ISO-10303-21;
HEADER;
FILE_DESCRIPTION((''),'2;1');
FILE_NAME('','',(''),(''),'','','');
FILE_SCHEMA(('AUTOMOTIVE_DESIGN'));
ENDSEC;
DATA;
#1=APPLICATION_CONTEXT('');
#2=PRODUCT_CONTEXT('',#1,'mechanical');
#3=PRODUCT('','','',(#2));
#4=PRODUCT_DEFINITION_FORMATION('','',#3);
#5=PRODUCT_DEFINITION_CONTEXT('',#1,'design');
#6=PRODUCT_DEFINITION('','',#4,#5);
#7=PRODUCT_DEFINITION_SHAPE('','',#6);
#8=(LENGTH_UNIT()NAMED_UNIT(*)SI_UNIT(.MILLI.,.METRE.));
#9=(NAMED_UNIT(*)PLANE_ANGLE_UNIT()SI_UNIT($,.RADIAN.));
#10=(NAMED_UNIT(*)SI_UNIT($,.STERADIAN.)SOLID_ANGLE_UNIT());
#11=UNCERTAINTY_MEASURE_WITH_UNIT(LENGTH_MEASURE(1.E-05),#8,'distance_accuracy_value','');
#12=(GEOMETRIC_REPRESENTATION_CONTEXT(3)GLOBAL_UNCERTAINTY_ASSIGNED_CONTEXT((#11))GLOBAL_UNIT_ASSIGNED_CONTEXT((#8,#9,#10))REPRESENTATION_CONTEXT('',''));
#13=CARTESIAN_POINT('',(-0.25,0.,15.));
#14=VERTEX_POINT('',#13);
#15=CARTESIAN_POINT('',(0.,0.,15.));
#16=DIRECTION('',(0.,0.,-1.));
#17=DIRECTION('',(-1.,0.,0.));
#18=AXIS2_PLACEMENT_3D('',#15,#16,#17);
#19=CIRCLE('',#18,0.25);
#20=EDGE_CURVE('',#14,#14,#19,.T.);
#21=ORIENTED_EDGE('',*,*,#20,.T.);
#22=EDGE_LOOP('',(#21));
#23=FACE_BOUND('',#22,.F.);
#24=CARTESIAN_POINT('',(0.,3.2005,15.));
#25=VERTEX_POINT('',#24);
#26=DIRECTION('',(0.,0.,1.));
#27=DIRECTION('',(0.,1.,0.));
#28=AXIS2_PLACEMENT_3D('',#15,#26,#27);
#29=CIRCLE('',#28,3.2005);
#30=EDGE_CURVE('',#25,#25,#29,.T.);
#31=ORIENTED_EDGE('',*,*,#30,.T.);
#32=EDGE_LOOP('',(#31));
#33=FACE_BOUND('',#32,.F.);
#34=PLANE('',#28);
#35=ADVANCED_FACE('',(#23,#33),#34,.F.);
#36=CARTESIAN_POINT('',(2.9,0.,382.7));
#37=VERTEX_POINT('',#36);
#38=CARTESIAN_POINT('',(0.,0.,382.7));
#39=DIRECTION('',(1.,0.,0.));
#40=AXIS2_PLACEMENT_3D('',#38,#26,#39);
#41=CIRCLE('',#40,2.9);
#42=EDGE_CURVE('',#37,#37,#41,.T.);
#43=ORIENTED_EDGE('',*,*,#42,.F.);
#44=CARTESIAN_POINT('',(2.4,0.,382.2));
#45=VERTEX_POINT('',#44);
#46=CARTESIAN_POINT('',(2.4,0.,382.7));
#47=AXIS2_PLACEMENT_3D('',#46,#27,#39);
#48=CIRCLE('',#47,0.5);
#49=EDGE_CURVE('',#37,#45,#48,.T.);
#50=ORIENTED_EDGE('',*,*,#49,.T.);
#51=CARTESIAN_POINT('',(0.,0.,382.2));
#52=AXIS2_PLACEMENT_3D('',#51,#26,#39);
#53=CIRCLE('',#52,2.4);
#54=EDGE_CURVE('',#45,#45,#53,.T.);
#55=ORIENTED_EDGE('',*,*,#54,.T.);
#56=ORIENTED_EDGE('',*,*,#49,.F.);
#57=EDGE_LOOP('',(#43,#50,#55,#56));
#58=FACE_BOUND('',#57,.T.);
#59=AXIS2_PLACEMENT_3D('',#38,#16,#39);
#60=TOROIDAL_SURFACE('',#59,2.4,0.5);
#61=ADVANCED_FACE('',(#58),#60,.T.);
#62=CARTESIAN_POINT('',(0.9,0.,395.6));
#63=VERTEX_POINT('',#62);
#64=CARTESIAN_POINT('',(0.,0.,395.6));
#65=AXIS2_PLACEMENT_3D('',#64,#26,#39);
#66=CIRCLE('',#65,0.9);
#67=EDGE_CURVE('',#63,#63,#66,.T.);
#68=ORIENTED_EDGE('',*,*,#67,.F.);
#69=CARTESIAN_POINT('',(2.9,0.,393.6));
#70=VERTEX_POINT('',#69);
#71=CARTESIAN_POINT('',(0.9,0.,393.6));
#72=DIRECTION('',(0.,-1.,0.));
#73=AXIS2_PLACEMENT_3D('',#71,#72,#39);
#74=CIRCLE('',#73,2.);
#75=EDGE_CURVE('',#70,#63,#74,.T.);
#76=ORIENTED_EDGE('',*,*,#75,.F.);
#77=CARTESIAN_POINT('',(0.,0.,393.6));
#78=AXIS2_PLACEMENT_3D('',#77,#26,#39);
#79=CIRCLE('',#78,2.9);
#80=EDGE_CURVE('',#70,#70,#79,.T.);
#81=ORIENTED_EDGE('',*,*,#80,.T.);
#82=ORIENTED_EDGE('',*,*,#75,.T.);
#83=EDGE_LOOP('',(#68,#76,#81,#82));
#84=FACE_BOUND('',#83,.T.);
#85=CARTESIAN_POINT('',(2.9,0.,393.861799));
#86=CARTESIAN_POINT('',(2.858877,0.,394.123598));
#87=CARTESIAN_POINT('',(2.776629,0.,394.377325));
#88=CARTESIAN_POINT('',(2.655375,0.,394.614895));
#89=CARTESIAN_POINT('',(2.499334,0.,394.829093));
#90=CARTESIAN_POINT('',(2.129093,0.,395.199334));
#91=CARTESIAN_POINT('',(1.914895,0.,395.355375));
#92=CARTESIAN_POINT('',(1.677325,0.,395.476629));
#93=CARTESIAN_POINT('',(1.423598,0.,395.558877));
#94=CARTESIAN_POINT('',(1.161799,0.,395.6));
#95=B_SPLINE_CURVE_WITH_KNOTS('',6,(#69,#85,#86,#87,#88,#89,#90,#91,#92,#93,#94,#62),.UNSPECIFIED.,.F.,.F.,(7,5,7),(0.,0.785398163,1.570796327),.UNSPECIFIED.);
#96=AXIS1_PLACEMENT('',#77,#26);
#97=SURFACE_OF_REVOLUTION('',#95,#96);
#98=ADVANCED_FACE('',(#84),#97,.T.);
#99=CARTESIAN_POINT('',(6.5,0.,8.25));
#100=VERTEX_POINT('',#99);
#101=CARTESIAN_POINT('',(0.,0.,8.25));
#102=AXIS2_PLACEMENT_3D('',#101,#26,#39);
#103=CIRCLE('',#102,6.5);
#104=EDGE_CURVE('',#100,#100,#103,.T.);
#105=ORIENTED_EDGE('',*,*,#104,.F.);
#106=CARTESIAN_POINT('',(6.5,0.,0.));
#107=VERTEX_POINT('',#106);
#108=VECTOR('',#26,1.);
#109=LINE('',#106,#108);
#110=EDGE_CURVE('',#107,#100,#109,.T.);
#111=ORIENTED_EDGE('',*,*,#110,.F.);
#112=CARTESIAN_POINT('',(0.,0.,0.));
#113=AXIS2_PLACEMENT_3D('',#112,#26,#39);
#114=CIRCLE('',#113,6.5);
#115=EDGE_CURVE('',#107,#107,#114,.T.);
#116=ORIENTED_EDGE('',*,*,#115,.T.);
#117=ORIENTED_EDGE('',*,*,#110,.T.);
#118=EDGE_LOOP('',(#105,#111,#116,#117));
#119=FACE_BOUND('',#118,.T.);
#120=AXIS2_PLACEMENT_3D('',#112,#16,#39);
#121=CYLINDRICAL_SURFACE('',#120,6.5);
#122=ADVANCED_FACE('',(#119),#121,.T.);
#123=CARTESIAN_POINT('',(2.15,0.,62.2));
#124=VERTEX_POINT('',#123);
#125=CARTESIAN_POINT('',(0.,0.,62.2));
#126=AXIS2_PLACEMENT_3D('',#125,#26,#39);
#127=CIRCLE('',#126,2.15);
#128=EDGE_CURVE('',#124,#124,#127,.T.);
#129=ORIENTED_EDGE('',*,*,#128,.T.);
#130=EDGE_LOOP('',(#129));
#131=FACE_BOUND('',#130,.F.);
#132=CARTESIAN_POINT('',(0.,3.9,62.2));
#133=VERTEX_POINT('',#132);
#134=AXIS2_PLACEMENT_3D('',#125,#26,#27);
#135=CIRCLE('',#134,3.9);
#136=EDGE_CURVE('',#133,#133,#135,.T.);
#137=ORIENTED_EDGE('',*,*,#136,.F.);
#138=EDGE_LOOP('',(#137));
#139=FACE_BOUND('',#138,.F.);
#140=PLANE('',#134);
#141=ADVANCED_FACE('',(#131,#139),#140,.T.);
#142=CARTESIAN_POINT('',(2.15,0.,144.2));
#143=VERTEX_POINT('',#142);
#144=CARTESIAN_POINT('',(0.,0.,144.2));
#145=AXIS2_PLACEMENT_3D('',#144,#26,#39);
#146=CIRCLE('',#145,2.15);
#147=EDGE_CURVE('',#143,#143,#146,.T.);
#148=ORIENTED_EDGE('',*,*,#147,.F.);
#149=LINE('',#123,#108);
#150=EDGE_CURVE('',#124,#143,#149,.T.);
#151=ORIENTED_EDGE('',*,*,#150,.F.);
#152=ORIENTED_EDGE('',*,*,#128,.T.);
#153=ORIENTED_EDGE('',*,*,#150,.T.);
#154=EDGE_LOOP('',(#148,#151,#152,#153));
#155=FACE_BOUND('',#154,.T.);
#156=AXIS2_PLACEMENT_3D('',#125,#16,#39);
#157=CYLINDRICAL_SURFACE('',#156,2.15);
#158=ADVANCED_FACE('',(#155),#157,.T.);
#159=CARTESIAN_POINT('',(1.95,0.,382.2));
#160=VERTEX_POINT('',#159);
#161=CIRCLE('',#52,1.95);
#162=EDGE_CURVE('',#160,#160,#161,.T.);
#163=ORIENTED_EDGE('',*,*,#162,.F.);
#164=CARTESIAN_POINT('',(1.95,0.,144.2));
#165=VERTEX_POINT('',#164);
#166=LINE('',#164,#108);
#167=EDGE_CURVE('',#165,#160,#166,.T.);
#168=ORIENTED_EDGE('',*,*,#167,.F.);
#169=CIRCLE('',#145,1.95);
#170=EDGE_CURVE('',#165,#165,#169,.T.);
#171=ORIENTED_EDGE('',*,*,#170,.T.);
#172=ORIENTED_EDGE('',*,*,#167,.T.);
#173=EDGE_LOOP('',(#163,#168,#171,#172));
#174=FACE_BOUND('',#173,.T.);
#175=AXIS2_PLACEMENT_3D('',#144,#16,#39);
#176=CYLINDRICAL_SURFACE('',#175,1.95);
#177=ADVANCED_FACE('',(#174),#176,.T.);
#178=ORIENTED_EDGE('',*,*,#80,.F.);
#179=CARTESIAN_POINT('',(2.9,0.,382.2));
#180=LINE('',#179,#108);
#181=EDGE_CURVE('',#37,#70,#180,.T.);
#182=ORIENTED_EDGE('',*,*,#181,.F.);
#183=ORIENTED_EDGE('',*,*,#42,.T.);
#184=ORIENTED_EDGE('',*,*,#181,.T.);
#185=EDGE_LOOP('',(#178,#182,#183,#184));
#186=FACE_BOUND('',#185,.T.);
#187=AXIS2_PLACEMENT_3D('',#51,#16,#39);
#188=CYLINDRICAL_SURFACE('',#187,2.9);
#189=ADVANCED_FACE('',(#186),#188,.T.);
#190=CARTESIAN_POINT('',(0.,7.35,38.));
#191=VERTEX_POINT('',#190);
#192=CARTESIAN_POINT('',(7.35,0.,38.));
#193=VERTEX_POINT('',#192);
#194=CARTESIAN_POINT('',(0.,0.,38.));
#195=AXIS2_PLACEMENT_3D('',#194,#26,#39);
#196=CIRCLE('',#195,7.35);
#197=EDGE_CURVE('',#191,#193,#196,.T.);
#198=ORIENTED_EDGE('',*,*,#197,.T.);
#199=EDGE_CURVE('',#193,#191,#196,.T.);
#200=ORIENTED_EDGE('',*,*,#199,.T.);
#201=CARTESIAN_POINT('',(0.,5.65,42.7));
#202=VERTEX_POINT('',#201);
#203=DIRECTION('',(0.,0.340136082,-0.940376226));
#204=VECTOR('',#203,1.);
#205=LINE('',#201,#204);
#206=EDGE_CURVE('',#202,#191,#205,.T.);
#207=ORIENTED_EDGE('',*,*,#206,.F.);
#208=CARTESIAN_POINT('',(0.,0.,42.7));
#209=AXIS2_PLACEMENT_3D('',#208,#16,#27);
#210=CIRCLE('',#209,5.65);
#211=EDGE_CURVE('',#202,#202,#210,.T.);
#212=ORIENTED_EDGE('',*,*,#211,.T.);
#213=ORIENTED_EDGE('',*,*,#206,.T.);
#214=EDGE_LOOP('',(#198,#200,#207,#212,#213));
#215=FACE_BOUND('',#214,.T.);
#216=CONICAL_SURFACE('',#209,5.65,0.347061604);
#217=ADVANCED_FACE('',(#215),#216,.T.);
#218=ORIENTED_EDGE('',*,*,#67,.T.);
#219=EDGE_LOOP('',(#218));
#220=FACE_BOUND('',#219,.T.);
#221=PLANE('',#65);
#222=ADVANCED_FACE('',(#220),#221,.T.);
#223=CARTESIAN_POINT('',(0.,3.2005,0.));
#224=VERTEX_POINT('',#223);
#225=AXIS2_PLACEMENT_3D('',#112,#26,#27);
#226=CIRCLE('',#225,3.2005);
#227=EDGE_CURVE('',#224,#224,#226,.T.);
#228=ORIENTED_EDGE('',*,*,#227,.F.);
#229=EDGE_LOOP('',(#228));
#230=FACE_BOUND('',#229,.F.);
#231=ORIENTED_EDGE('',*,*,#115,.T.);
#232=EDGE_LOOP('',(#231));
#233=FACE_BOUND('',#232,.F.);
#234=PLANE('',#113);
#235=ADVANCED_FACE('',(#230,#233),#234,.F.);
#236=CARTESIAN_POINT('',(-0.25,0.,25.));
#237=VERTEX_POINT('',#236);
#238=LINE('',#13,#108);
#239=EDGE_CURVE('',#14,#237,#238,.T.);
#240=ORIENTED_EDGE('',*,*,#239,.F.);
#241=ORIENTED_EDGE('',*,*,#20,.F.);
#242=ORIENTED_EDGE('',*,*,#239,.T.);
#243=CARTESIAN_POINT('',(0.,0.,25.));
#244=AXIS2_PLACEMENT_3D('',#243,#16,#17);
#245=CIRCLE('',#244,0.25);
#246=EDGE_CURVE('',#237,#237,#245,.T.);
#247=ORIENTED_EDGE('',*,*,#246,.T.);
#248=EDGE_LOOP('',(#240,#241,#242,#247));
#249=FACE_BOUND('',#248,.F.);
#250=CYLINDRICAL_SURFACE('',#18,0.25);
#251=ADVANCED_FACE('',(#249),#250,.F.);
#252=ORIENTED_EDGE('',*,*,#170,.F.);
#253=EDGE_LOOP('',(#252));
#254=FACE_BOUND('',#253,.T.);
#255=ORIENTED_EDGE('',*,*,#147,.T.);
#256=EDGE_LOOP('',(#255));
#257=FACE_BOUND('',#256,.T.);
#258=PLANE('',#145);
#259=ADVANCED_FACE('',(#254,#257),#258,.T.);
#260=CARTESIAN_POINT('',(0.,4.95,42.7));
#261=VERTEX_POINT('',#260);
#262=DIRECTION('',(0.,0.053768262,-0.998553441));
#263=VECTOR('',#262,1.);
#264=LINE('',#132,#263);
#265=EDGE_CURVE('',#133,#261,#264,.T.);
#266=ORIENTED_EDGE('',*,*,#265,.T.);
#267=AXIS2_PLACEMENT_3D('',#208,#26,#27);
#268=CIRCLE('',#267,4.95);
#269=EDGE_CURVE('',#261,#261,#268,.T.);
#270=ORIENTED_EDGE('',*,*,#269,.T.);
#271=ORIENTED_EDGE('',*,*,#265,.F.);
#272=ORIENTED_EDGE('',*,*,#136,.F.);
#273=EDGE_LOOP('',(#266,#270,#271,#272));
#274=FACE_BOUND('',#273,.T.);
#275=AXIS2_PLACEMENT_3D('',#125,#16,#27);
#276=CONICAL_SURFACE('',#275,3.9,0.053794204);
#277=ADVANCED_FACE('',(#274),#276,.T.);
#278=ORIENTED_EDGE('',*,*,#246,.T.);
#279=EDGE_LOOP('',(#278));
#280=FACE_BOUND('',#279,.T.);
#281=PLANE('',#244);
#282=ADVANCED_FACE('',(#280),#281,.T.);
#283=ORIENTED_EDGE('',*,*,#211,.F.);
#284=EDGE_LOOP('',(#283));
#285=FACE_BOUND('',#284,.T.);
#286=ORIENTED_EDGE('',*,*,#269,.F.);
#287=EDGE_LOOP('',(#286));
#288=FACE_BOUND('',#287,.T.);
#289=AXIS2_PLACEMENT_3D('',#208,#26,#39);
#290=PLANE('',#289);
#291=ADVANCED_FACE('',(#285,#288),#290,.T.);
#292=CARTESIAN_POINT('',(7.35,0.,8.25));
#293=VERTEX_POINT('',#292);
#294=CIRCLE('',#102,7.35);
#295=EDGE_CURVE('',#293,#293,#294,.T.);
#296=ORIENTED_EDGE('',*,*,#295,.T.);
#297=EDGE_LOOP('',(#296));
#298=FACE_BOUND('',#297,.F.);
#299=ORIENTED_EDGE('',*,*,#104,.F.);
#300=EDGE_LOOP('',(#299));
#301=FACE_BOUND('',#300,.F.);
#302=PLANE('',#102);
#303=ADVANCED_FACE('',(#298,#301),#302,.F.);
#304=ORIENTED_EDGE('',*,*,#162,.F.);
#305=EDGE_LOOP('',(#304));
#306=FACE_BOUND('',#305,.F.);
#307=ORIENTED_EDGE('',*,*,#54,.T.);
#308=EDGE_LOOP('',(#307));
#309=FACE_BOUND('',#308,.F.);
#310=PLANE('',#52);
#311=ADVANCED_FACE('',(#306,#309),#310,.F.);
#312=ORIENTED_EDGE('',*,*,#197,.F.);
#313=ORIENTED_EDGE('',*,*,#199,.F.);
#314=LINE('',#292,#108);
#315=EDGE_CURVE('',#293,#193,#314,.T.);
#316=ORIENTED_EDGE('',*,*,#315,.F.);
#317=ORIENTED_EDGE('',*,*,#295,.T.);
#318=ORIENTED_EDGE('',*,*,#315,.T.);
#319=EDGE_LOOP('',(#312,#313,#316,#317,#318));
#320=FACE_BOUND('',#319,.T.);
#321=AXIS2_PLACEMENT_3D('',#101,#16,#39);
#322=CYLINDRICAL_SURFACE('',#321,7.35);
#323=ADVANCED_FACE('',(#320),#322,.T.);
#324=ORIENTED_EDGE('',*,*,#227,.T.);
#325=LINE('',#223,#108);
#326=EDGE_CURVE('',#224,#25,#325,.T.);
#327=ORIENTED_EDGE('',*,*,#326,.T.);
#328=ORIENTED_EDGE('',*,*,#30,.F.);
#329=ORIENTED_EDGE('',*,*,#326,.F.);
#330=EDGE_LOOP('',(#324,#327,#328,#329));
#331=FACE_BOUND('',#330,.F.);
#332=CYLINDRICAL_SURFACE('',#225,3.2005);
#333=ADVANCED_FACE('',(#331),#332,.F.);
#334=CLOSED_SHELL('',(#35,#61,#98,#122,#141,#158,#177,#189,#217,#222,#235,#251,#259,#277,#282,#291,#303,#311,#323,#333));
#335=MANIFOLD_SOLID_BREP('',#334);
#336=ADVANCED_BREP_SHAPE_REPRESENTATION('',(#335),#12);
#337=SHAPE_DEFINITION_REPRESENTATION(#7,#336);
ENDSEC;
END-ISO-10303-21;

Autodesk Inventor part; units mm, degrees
ref_plane "YZ Plane" through (0, 0, 0) normal (1, 0, 0) x (0, 1, 0)
ref_plane "XZ Plane" through (0, 0, 0) normal (0, 1, 0) x (-1, 0, 0)
ref_plane "XY Plane" through (0, 0, 0) normal (0, 0, 1) x (1, 0, 0)
sketch "Boceto1" plane through (0, 0, 0) normal (0, 0, 1) x (1, 0, 0)
  circle A0 centre (0, 0) radius 6.5
  dimension "d0" = 13
extrude "Extrusión1" add sketch "Boceto1" along normal blind 8.25
sketch "Boceto2" plane through (0, 0, 8.25) normal (0, 0, 1) x (1, 0, 0)
  circle A0 centre (0, 0) radius 6.5 projected
  circle A1 centre (0, 0) radius 7.35
  dimension "d3" = 14.7
extrude "Extrusión2" add sketch "Boceto2" along normal blind 29.75 contours A0 | A1
sketch "Boceto3" plane through (0, 0, 38) normal (0, 0, 1) x (1, 0, 0)
  circle A0 centre (0, 0) radius 7.35 projected
  circle A1 centre (0, 0) radius 5.65
  dimension "d6" = 11.3
extrude "Extrusión3" add sketch "Boceto3" along normal blind 4.7 contours A1
sketch "Boceto4" plane through (0, 0, 0) normal (1, 0, 0) x (0, 1, 0)
  line L0 (5.65, 42.7) -> (-5.65, 42.7) projected
  line L1 (7.35, 38) -> (-7.35, 38) projected
  line L2 (5.65, 42.7) -> (7.35, 38)
  line L3 (5.65, 38) -> (5.65, 42.7)
  line L4 (0, 42.7) -> (0, 50.6655) construction
  point P0 (0, 0)
revolve "Revolución1" add sketch "Boceto4" angle 360 about axis through (0, 0, 42.7) along (0, 0, 1)
sketch "Boceto7" plane through (0, 0, 0) normal (1, 0, 0) x (0, 1, 0)
  line L0 (5.65, 42.7) -> (-5.65, 42.7) projected
  line L1 (0, 42.7) -> (4.95, 42.7) construction
  line L2 (0, 42.7) -> (0, 62.2)
  line L3 (0, 62.2) -> (3.9, 62.2)
  line L4 (3.9, 62.2) -> (4.95, 42.7)
  point P0 (0, 0)
  dimension "d13" = 4.95
  dimension "d14" = 19.5
  dimension "d15" = 3.9
revolve "Revolución2" add sketch "Boceto7" angle 360 about axis through (0, 0, 42.7) along (0, 0, 1)
sketch "Boceto8" plane through (0, 0, 62.2) normal (0, 0, 1) x (1, 0, 0)
  circle A0 centre (0, 0) radius 3.9 projected
  circle A1 centre (0, 0) radius 2.15
  dimension "d17" = 4.3
extrude "Extrusión5" add sketch "Boceto8" along normal blind 82 contours A1
sketch "Boceto9" plane through (0, 0, 144.2) normal (0, 0, 1) x (1, 0, 0)
  circle A0 centre (0, 0) radius 2.15 projected
  circle A1 centre (0, 0) radius 1.95
  dimension "d20" = 3.9
extrude "Extrusión6" add sketch "Boceto9" along normal blind 238 contours A1
sketch "Boceto10" plane through (0, 0, 382.2) normal (0, 0, 1) x (1, 0, 0)
  circle A0 centre (0, 0) radius 1.95 projected
  circle A1 centre (0, 0) radius 2.9
  dimension "d23" = 5.8
extrude "Extrusión7" add sketch "Boceto10" along normal blind 13.4 contours A0 | A1
fillet "Empalme1" radius 2 1 edges at (-2.9, 0, 395.6)
fillet "Empalme2" radius 0.5 1 edges at (-2.9, 0, 382.2)
sketch "Boceto11" plane through (0, 0, 0) normal (0, 0, -1) x (-1, 0, 0)
  circle A0 centre (0, 0) radius 6.5 projected
  circle A1 centre (0, 0) radius 3.05
  dimension "d28" = 6.1
hole "Hole1" at (0, 0, 0) direction (0, 0, 1) diameter 6.401 depth 15 thread size "5/16-18 UNC" class "1B" standard "ANSI Unified Screw Threads"
sketch "Boceto12" plane through (0, 0, 15) normal (0, 0, -1) x (-1, 0, 0)
  circle A0 centre (0, 0) radius 3.2005 projected
  circle A1 centre (0, 0) radius 0.25
  dimension "d36" = 0.5
extrude "Extrusión8" cut sketch "Boceto12" against normal blind 10 contours A1
properties part number "nagoya771"
